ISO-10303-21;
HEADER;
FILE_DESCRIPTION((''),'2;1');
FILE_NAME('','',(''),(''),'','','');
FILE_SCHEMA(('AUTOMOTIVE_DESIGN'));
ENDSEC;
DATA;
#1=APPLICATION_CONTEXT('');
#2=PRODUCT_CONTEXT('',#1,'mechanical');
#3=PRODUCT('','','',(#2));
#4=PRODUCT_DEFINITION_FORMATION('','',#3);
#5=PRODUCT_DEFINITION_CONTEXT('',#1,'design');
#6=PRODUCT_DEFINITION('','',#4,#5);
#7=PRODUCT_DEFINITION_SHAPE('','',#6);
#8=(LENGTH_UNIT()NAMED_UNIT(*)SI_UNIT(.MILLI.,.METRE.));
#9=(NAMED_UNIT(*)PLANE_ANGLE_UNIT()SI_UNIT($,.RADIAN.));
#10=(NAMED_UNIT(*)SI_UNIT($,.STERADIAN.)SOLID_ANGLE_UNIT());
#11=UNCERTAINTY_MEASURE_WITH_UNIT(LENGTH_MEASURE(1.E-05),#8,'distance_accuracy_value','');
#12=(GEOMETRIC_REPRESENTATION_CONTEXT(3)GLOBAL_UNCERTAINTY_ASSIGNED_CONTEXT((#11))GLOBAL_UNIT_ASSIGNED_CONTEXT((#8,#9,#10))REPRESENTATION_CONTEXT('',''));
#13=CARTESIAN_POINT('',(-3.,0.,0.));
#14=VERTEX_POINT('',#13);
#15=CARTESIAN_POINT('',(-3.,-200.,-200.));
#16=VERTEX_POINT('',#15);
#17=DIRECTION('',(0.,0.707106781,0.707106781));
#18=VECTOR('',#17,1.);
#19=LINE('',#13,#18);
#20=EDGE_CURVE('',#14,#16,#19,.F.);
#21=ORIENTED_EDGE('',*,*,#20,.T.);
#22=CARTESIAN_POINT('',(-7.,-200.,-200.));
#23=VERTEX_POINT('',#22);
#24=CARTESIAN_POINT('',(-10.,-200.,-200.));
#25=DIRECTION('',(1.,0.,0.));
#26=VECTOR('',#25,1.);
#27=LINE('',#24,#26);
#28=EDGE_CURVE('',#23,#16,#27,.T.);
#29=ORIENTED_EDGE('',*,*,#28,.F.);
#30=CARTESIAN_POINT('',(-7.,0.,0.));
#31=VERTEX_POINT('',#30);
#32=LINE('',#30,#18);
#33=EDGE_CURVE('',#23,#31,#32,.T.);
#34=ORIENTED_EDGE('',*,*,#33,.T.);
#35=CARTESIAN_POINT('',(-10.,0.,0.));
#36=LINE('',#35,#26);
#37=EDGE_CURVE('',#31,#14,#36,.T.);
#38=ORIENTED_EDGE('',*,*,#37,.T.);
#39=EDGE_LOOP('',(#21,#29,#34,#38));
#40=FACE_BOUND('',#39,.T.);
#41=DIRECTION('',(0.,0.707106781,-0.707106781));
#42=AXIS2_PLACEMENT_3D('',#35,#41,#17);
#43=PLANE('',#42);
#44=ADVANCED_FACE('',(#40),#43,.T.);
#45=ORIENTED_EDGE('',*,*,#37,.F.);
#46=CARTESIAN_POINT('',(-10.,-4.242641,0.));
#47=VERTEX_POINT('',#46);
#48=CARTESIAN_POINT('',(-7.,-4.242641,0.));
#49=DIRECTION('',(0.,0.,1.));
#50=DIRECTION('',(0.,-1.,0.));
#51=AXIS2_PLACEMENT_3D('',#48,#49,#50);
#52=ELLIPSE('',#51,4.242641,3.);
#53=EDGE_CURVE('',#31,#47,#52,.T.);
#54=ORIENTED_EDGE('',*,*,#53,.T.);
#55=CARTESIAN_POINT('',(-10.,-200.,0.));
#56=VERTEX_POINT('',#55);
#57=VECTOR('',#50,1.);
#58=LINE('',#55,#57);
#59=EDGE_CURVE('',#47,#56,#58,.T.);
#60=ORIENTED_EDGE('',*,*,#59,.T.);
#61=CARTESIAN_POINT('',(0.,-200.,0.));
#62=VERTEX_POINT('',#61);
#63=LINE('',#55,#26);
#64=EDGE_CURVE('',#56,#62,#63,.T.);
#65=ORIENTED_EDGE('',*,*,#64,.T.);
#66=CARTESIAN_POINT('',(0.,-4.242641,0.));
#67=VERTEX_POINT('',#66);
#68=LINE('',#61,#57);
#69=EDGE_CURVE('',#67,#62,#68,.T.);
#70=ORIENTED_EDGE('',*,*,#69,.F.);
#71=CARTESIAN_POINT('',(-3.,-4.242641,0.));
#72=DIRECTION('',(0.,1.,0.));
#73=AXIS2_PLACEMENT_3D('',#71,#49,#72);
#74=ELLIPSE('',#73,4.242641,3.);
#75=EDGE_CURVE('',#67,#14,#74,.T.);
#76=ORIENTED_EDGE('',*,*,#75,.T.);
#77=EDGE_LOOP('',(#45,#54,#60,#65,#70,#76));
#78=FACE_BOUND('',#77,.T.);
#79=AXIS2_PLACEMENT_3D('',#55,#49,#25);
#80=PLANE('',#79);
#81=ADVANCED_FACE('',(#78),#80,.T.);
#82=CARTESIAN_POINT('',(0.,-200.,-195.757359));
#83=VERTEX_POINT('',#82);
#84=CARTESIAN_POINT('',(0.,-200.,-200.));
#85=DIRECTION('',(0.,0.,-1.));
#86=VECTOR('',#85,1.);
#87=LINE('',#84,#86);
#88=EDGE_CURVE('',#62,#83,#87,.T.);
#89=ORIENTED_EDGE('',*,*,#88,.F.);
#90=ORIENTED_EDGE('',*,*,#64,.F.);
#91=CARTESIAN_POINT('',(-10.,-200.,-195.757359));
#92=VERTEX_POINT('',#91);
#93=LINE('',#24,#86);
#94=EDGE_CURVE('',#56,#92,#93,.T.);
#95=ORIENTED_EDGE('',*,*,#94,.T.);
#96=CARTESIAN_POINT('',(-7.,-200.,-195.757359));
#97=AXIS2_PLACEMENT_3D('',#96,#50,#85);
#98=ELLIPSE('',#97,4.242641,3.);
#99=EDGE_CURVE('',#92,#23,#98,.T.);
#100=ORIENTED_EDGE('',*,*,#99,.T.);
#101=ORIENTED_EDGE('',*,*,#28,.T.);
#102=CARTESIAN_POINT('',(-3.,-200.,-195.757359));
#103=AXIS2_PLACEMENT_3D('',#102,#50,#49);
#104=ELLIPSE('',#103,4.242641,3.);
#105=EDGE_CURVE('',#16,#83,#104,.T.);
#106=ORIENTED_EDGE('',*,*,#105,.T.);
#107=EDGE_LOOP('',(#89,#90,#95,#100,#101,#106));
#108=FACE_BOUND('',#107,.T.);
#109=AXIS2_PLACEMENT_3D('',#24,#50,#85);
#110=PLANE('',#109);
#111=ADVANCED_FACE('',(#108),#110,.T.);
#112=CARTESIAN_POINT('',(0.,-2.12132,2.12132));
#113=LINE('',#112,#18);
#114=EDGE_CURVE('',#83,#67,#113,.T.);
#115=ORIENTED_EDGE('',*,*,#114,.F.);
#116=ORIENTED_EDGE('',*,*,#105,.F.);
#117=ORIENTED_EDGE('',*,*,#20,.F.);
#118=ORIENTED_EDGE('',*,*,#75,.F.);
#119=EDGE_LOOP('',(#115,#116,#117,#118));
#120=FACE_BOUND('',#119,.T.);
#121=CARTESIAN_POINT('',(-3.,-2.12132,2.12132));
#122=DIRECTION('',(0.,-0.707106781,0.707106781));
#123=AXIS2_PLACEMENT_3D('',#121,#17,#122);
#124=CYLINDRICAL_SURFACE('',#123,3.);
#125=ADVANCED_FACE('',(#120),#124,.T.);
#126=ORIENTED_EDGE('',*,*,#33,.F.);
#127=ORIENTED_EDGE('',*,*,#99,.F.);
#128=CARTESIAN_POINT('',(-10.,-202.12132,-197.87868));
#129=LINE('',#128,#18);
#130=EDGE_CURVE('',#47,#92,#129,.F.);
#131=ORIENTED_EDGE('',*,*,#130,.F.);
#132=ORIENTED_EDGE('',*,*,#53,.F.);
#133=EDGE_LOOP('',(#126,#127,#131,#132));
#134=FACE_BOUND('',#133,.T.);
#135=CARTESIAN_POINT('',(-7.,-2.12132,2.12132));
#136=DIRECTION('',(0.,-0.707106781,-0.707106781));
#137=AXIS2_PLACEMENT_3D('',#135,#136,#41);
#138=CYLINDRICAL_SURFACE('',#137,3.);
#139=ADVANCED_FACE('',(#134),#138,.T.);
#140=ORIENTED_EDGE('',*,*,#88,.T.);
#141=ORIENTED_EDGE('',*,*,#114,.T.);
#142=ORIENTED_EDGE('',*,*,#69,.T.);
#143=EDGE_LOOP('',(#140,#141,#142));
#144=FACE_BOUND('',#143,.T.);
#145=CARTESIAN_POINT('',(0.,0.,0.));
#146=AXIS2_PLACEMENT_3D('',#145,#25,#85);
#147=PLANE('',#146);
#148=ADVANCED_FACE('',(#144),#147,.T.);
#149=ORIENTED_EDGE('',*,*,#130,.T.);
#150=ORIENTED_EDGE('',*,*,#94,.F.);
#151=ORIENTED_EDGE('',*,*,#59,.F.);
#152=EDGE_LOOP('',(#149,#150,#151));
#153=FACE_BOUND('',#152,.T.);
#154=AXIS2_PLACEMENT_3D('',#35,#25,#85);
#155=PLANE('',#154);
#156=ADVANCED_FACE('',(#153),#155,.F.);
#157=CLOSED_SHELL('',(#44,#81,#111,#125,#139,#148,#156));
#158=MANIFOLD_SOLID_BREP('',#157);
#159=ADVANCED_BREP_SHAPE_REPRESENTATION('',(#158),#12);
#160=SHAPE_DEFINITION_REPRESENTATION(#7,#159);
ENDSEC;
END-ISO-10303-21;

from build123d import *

# Parameters (mm, degrees)
BASE_FLANGE1_DEPTH = 10
FILLET1_R          = 3


# Sheet-metal steps are written as plain solids
with BuildPart() as part:
    # Sketch1 → Base-Flange1 (new body)
    with BuildSketch(Plane(origin=(0, 0, 0), x_dir=(0, 0, -1), z_dir=(1, 0, 0))):
        Polygon((0, 0), (200, -200), (0, -200), align=None)
    extrude(amount=-BASE_FLANGE1_DEPTH)

    # Fillet1
    fillet1_edges = [part.edges().sort_by_distance(p)[0] for p in [
        (-10, -100, -100),
        (0, -100, -100),
    ]]
    fillet(fillet1_edges, radius=FILLET1_R)


solid = part.part
